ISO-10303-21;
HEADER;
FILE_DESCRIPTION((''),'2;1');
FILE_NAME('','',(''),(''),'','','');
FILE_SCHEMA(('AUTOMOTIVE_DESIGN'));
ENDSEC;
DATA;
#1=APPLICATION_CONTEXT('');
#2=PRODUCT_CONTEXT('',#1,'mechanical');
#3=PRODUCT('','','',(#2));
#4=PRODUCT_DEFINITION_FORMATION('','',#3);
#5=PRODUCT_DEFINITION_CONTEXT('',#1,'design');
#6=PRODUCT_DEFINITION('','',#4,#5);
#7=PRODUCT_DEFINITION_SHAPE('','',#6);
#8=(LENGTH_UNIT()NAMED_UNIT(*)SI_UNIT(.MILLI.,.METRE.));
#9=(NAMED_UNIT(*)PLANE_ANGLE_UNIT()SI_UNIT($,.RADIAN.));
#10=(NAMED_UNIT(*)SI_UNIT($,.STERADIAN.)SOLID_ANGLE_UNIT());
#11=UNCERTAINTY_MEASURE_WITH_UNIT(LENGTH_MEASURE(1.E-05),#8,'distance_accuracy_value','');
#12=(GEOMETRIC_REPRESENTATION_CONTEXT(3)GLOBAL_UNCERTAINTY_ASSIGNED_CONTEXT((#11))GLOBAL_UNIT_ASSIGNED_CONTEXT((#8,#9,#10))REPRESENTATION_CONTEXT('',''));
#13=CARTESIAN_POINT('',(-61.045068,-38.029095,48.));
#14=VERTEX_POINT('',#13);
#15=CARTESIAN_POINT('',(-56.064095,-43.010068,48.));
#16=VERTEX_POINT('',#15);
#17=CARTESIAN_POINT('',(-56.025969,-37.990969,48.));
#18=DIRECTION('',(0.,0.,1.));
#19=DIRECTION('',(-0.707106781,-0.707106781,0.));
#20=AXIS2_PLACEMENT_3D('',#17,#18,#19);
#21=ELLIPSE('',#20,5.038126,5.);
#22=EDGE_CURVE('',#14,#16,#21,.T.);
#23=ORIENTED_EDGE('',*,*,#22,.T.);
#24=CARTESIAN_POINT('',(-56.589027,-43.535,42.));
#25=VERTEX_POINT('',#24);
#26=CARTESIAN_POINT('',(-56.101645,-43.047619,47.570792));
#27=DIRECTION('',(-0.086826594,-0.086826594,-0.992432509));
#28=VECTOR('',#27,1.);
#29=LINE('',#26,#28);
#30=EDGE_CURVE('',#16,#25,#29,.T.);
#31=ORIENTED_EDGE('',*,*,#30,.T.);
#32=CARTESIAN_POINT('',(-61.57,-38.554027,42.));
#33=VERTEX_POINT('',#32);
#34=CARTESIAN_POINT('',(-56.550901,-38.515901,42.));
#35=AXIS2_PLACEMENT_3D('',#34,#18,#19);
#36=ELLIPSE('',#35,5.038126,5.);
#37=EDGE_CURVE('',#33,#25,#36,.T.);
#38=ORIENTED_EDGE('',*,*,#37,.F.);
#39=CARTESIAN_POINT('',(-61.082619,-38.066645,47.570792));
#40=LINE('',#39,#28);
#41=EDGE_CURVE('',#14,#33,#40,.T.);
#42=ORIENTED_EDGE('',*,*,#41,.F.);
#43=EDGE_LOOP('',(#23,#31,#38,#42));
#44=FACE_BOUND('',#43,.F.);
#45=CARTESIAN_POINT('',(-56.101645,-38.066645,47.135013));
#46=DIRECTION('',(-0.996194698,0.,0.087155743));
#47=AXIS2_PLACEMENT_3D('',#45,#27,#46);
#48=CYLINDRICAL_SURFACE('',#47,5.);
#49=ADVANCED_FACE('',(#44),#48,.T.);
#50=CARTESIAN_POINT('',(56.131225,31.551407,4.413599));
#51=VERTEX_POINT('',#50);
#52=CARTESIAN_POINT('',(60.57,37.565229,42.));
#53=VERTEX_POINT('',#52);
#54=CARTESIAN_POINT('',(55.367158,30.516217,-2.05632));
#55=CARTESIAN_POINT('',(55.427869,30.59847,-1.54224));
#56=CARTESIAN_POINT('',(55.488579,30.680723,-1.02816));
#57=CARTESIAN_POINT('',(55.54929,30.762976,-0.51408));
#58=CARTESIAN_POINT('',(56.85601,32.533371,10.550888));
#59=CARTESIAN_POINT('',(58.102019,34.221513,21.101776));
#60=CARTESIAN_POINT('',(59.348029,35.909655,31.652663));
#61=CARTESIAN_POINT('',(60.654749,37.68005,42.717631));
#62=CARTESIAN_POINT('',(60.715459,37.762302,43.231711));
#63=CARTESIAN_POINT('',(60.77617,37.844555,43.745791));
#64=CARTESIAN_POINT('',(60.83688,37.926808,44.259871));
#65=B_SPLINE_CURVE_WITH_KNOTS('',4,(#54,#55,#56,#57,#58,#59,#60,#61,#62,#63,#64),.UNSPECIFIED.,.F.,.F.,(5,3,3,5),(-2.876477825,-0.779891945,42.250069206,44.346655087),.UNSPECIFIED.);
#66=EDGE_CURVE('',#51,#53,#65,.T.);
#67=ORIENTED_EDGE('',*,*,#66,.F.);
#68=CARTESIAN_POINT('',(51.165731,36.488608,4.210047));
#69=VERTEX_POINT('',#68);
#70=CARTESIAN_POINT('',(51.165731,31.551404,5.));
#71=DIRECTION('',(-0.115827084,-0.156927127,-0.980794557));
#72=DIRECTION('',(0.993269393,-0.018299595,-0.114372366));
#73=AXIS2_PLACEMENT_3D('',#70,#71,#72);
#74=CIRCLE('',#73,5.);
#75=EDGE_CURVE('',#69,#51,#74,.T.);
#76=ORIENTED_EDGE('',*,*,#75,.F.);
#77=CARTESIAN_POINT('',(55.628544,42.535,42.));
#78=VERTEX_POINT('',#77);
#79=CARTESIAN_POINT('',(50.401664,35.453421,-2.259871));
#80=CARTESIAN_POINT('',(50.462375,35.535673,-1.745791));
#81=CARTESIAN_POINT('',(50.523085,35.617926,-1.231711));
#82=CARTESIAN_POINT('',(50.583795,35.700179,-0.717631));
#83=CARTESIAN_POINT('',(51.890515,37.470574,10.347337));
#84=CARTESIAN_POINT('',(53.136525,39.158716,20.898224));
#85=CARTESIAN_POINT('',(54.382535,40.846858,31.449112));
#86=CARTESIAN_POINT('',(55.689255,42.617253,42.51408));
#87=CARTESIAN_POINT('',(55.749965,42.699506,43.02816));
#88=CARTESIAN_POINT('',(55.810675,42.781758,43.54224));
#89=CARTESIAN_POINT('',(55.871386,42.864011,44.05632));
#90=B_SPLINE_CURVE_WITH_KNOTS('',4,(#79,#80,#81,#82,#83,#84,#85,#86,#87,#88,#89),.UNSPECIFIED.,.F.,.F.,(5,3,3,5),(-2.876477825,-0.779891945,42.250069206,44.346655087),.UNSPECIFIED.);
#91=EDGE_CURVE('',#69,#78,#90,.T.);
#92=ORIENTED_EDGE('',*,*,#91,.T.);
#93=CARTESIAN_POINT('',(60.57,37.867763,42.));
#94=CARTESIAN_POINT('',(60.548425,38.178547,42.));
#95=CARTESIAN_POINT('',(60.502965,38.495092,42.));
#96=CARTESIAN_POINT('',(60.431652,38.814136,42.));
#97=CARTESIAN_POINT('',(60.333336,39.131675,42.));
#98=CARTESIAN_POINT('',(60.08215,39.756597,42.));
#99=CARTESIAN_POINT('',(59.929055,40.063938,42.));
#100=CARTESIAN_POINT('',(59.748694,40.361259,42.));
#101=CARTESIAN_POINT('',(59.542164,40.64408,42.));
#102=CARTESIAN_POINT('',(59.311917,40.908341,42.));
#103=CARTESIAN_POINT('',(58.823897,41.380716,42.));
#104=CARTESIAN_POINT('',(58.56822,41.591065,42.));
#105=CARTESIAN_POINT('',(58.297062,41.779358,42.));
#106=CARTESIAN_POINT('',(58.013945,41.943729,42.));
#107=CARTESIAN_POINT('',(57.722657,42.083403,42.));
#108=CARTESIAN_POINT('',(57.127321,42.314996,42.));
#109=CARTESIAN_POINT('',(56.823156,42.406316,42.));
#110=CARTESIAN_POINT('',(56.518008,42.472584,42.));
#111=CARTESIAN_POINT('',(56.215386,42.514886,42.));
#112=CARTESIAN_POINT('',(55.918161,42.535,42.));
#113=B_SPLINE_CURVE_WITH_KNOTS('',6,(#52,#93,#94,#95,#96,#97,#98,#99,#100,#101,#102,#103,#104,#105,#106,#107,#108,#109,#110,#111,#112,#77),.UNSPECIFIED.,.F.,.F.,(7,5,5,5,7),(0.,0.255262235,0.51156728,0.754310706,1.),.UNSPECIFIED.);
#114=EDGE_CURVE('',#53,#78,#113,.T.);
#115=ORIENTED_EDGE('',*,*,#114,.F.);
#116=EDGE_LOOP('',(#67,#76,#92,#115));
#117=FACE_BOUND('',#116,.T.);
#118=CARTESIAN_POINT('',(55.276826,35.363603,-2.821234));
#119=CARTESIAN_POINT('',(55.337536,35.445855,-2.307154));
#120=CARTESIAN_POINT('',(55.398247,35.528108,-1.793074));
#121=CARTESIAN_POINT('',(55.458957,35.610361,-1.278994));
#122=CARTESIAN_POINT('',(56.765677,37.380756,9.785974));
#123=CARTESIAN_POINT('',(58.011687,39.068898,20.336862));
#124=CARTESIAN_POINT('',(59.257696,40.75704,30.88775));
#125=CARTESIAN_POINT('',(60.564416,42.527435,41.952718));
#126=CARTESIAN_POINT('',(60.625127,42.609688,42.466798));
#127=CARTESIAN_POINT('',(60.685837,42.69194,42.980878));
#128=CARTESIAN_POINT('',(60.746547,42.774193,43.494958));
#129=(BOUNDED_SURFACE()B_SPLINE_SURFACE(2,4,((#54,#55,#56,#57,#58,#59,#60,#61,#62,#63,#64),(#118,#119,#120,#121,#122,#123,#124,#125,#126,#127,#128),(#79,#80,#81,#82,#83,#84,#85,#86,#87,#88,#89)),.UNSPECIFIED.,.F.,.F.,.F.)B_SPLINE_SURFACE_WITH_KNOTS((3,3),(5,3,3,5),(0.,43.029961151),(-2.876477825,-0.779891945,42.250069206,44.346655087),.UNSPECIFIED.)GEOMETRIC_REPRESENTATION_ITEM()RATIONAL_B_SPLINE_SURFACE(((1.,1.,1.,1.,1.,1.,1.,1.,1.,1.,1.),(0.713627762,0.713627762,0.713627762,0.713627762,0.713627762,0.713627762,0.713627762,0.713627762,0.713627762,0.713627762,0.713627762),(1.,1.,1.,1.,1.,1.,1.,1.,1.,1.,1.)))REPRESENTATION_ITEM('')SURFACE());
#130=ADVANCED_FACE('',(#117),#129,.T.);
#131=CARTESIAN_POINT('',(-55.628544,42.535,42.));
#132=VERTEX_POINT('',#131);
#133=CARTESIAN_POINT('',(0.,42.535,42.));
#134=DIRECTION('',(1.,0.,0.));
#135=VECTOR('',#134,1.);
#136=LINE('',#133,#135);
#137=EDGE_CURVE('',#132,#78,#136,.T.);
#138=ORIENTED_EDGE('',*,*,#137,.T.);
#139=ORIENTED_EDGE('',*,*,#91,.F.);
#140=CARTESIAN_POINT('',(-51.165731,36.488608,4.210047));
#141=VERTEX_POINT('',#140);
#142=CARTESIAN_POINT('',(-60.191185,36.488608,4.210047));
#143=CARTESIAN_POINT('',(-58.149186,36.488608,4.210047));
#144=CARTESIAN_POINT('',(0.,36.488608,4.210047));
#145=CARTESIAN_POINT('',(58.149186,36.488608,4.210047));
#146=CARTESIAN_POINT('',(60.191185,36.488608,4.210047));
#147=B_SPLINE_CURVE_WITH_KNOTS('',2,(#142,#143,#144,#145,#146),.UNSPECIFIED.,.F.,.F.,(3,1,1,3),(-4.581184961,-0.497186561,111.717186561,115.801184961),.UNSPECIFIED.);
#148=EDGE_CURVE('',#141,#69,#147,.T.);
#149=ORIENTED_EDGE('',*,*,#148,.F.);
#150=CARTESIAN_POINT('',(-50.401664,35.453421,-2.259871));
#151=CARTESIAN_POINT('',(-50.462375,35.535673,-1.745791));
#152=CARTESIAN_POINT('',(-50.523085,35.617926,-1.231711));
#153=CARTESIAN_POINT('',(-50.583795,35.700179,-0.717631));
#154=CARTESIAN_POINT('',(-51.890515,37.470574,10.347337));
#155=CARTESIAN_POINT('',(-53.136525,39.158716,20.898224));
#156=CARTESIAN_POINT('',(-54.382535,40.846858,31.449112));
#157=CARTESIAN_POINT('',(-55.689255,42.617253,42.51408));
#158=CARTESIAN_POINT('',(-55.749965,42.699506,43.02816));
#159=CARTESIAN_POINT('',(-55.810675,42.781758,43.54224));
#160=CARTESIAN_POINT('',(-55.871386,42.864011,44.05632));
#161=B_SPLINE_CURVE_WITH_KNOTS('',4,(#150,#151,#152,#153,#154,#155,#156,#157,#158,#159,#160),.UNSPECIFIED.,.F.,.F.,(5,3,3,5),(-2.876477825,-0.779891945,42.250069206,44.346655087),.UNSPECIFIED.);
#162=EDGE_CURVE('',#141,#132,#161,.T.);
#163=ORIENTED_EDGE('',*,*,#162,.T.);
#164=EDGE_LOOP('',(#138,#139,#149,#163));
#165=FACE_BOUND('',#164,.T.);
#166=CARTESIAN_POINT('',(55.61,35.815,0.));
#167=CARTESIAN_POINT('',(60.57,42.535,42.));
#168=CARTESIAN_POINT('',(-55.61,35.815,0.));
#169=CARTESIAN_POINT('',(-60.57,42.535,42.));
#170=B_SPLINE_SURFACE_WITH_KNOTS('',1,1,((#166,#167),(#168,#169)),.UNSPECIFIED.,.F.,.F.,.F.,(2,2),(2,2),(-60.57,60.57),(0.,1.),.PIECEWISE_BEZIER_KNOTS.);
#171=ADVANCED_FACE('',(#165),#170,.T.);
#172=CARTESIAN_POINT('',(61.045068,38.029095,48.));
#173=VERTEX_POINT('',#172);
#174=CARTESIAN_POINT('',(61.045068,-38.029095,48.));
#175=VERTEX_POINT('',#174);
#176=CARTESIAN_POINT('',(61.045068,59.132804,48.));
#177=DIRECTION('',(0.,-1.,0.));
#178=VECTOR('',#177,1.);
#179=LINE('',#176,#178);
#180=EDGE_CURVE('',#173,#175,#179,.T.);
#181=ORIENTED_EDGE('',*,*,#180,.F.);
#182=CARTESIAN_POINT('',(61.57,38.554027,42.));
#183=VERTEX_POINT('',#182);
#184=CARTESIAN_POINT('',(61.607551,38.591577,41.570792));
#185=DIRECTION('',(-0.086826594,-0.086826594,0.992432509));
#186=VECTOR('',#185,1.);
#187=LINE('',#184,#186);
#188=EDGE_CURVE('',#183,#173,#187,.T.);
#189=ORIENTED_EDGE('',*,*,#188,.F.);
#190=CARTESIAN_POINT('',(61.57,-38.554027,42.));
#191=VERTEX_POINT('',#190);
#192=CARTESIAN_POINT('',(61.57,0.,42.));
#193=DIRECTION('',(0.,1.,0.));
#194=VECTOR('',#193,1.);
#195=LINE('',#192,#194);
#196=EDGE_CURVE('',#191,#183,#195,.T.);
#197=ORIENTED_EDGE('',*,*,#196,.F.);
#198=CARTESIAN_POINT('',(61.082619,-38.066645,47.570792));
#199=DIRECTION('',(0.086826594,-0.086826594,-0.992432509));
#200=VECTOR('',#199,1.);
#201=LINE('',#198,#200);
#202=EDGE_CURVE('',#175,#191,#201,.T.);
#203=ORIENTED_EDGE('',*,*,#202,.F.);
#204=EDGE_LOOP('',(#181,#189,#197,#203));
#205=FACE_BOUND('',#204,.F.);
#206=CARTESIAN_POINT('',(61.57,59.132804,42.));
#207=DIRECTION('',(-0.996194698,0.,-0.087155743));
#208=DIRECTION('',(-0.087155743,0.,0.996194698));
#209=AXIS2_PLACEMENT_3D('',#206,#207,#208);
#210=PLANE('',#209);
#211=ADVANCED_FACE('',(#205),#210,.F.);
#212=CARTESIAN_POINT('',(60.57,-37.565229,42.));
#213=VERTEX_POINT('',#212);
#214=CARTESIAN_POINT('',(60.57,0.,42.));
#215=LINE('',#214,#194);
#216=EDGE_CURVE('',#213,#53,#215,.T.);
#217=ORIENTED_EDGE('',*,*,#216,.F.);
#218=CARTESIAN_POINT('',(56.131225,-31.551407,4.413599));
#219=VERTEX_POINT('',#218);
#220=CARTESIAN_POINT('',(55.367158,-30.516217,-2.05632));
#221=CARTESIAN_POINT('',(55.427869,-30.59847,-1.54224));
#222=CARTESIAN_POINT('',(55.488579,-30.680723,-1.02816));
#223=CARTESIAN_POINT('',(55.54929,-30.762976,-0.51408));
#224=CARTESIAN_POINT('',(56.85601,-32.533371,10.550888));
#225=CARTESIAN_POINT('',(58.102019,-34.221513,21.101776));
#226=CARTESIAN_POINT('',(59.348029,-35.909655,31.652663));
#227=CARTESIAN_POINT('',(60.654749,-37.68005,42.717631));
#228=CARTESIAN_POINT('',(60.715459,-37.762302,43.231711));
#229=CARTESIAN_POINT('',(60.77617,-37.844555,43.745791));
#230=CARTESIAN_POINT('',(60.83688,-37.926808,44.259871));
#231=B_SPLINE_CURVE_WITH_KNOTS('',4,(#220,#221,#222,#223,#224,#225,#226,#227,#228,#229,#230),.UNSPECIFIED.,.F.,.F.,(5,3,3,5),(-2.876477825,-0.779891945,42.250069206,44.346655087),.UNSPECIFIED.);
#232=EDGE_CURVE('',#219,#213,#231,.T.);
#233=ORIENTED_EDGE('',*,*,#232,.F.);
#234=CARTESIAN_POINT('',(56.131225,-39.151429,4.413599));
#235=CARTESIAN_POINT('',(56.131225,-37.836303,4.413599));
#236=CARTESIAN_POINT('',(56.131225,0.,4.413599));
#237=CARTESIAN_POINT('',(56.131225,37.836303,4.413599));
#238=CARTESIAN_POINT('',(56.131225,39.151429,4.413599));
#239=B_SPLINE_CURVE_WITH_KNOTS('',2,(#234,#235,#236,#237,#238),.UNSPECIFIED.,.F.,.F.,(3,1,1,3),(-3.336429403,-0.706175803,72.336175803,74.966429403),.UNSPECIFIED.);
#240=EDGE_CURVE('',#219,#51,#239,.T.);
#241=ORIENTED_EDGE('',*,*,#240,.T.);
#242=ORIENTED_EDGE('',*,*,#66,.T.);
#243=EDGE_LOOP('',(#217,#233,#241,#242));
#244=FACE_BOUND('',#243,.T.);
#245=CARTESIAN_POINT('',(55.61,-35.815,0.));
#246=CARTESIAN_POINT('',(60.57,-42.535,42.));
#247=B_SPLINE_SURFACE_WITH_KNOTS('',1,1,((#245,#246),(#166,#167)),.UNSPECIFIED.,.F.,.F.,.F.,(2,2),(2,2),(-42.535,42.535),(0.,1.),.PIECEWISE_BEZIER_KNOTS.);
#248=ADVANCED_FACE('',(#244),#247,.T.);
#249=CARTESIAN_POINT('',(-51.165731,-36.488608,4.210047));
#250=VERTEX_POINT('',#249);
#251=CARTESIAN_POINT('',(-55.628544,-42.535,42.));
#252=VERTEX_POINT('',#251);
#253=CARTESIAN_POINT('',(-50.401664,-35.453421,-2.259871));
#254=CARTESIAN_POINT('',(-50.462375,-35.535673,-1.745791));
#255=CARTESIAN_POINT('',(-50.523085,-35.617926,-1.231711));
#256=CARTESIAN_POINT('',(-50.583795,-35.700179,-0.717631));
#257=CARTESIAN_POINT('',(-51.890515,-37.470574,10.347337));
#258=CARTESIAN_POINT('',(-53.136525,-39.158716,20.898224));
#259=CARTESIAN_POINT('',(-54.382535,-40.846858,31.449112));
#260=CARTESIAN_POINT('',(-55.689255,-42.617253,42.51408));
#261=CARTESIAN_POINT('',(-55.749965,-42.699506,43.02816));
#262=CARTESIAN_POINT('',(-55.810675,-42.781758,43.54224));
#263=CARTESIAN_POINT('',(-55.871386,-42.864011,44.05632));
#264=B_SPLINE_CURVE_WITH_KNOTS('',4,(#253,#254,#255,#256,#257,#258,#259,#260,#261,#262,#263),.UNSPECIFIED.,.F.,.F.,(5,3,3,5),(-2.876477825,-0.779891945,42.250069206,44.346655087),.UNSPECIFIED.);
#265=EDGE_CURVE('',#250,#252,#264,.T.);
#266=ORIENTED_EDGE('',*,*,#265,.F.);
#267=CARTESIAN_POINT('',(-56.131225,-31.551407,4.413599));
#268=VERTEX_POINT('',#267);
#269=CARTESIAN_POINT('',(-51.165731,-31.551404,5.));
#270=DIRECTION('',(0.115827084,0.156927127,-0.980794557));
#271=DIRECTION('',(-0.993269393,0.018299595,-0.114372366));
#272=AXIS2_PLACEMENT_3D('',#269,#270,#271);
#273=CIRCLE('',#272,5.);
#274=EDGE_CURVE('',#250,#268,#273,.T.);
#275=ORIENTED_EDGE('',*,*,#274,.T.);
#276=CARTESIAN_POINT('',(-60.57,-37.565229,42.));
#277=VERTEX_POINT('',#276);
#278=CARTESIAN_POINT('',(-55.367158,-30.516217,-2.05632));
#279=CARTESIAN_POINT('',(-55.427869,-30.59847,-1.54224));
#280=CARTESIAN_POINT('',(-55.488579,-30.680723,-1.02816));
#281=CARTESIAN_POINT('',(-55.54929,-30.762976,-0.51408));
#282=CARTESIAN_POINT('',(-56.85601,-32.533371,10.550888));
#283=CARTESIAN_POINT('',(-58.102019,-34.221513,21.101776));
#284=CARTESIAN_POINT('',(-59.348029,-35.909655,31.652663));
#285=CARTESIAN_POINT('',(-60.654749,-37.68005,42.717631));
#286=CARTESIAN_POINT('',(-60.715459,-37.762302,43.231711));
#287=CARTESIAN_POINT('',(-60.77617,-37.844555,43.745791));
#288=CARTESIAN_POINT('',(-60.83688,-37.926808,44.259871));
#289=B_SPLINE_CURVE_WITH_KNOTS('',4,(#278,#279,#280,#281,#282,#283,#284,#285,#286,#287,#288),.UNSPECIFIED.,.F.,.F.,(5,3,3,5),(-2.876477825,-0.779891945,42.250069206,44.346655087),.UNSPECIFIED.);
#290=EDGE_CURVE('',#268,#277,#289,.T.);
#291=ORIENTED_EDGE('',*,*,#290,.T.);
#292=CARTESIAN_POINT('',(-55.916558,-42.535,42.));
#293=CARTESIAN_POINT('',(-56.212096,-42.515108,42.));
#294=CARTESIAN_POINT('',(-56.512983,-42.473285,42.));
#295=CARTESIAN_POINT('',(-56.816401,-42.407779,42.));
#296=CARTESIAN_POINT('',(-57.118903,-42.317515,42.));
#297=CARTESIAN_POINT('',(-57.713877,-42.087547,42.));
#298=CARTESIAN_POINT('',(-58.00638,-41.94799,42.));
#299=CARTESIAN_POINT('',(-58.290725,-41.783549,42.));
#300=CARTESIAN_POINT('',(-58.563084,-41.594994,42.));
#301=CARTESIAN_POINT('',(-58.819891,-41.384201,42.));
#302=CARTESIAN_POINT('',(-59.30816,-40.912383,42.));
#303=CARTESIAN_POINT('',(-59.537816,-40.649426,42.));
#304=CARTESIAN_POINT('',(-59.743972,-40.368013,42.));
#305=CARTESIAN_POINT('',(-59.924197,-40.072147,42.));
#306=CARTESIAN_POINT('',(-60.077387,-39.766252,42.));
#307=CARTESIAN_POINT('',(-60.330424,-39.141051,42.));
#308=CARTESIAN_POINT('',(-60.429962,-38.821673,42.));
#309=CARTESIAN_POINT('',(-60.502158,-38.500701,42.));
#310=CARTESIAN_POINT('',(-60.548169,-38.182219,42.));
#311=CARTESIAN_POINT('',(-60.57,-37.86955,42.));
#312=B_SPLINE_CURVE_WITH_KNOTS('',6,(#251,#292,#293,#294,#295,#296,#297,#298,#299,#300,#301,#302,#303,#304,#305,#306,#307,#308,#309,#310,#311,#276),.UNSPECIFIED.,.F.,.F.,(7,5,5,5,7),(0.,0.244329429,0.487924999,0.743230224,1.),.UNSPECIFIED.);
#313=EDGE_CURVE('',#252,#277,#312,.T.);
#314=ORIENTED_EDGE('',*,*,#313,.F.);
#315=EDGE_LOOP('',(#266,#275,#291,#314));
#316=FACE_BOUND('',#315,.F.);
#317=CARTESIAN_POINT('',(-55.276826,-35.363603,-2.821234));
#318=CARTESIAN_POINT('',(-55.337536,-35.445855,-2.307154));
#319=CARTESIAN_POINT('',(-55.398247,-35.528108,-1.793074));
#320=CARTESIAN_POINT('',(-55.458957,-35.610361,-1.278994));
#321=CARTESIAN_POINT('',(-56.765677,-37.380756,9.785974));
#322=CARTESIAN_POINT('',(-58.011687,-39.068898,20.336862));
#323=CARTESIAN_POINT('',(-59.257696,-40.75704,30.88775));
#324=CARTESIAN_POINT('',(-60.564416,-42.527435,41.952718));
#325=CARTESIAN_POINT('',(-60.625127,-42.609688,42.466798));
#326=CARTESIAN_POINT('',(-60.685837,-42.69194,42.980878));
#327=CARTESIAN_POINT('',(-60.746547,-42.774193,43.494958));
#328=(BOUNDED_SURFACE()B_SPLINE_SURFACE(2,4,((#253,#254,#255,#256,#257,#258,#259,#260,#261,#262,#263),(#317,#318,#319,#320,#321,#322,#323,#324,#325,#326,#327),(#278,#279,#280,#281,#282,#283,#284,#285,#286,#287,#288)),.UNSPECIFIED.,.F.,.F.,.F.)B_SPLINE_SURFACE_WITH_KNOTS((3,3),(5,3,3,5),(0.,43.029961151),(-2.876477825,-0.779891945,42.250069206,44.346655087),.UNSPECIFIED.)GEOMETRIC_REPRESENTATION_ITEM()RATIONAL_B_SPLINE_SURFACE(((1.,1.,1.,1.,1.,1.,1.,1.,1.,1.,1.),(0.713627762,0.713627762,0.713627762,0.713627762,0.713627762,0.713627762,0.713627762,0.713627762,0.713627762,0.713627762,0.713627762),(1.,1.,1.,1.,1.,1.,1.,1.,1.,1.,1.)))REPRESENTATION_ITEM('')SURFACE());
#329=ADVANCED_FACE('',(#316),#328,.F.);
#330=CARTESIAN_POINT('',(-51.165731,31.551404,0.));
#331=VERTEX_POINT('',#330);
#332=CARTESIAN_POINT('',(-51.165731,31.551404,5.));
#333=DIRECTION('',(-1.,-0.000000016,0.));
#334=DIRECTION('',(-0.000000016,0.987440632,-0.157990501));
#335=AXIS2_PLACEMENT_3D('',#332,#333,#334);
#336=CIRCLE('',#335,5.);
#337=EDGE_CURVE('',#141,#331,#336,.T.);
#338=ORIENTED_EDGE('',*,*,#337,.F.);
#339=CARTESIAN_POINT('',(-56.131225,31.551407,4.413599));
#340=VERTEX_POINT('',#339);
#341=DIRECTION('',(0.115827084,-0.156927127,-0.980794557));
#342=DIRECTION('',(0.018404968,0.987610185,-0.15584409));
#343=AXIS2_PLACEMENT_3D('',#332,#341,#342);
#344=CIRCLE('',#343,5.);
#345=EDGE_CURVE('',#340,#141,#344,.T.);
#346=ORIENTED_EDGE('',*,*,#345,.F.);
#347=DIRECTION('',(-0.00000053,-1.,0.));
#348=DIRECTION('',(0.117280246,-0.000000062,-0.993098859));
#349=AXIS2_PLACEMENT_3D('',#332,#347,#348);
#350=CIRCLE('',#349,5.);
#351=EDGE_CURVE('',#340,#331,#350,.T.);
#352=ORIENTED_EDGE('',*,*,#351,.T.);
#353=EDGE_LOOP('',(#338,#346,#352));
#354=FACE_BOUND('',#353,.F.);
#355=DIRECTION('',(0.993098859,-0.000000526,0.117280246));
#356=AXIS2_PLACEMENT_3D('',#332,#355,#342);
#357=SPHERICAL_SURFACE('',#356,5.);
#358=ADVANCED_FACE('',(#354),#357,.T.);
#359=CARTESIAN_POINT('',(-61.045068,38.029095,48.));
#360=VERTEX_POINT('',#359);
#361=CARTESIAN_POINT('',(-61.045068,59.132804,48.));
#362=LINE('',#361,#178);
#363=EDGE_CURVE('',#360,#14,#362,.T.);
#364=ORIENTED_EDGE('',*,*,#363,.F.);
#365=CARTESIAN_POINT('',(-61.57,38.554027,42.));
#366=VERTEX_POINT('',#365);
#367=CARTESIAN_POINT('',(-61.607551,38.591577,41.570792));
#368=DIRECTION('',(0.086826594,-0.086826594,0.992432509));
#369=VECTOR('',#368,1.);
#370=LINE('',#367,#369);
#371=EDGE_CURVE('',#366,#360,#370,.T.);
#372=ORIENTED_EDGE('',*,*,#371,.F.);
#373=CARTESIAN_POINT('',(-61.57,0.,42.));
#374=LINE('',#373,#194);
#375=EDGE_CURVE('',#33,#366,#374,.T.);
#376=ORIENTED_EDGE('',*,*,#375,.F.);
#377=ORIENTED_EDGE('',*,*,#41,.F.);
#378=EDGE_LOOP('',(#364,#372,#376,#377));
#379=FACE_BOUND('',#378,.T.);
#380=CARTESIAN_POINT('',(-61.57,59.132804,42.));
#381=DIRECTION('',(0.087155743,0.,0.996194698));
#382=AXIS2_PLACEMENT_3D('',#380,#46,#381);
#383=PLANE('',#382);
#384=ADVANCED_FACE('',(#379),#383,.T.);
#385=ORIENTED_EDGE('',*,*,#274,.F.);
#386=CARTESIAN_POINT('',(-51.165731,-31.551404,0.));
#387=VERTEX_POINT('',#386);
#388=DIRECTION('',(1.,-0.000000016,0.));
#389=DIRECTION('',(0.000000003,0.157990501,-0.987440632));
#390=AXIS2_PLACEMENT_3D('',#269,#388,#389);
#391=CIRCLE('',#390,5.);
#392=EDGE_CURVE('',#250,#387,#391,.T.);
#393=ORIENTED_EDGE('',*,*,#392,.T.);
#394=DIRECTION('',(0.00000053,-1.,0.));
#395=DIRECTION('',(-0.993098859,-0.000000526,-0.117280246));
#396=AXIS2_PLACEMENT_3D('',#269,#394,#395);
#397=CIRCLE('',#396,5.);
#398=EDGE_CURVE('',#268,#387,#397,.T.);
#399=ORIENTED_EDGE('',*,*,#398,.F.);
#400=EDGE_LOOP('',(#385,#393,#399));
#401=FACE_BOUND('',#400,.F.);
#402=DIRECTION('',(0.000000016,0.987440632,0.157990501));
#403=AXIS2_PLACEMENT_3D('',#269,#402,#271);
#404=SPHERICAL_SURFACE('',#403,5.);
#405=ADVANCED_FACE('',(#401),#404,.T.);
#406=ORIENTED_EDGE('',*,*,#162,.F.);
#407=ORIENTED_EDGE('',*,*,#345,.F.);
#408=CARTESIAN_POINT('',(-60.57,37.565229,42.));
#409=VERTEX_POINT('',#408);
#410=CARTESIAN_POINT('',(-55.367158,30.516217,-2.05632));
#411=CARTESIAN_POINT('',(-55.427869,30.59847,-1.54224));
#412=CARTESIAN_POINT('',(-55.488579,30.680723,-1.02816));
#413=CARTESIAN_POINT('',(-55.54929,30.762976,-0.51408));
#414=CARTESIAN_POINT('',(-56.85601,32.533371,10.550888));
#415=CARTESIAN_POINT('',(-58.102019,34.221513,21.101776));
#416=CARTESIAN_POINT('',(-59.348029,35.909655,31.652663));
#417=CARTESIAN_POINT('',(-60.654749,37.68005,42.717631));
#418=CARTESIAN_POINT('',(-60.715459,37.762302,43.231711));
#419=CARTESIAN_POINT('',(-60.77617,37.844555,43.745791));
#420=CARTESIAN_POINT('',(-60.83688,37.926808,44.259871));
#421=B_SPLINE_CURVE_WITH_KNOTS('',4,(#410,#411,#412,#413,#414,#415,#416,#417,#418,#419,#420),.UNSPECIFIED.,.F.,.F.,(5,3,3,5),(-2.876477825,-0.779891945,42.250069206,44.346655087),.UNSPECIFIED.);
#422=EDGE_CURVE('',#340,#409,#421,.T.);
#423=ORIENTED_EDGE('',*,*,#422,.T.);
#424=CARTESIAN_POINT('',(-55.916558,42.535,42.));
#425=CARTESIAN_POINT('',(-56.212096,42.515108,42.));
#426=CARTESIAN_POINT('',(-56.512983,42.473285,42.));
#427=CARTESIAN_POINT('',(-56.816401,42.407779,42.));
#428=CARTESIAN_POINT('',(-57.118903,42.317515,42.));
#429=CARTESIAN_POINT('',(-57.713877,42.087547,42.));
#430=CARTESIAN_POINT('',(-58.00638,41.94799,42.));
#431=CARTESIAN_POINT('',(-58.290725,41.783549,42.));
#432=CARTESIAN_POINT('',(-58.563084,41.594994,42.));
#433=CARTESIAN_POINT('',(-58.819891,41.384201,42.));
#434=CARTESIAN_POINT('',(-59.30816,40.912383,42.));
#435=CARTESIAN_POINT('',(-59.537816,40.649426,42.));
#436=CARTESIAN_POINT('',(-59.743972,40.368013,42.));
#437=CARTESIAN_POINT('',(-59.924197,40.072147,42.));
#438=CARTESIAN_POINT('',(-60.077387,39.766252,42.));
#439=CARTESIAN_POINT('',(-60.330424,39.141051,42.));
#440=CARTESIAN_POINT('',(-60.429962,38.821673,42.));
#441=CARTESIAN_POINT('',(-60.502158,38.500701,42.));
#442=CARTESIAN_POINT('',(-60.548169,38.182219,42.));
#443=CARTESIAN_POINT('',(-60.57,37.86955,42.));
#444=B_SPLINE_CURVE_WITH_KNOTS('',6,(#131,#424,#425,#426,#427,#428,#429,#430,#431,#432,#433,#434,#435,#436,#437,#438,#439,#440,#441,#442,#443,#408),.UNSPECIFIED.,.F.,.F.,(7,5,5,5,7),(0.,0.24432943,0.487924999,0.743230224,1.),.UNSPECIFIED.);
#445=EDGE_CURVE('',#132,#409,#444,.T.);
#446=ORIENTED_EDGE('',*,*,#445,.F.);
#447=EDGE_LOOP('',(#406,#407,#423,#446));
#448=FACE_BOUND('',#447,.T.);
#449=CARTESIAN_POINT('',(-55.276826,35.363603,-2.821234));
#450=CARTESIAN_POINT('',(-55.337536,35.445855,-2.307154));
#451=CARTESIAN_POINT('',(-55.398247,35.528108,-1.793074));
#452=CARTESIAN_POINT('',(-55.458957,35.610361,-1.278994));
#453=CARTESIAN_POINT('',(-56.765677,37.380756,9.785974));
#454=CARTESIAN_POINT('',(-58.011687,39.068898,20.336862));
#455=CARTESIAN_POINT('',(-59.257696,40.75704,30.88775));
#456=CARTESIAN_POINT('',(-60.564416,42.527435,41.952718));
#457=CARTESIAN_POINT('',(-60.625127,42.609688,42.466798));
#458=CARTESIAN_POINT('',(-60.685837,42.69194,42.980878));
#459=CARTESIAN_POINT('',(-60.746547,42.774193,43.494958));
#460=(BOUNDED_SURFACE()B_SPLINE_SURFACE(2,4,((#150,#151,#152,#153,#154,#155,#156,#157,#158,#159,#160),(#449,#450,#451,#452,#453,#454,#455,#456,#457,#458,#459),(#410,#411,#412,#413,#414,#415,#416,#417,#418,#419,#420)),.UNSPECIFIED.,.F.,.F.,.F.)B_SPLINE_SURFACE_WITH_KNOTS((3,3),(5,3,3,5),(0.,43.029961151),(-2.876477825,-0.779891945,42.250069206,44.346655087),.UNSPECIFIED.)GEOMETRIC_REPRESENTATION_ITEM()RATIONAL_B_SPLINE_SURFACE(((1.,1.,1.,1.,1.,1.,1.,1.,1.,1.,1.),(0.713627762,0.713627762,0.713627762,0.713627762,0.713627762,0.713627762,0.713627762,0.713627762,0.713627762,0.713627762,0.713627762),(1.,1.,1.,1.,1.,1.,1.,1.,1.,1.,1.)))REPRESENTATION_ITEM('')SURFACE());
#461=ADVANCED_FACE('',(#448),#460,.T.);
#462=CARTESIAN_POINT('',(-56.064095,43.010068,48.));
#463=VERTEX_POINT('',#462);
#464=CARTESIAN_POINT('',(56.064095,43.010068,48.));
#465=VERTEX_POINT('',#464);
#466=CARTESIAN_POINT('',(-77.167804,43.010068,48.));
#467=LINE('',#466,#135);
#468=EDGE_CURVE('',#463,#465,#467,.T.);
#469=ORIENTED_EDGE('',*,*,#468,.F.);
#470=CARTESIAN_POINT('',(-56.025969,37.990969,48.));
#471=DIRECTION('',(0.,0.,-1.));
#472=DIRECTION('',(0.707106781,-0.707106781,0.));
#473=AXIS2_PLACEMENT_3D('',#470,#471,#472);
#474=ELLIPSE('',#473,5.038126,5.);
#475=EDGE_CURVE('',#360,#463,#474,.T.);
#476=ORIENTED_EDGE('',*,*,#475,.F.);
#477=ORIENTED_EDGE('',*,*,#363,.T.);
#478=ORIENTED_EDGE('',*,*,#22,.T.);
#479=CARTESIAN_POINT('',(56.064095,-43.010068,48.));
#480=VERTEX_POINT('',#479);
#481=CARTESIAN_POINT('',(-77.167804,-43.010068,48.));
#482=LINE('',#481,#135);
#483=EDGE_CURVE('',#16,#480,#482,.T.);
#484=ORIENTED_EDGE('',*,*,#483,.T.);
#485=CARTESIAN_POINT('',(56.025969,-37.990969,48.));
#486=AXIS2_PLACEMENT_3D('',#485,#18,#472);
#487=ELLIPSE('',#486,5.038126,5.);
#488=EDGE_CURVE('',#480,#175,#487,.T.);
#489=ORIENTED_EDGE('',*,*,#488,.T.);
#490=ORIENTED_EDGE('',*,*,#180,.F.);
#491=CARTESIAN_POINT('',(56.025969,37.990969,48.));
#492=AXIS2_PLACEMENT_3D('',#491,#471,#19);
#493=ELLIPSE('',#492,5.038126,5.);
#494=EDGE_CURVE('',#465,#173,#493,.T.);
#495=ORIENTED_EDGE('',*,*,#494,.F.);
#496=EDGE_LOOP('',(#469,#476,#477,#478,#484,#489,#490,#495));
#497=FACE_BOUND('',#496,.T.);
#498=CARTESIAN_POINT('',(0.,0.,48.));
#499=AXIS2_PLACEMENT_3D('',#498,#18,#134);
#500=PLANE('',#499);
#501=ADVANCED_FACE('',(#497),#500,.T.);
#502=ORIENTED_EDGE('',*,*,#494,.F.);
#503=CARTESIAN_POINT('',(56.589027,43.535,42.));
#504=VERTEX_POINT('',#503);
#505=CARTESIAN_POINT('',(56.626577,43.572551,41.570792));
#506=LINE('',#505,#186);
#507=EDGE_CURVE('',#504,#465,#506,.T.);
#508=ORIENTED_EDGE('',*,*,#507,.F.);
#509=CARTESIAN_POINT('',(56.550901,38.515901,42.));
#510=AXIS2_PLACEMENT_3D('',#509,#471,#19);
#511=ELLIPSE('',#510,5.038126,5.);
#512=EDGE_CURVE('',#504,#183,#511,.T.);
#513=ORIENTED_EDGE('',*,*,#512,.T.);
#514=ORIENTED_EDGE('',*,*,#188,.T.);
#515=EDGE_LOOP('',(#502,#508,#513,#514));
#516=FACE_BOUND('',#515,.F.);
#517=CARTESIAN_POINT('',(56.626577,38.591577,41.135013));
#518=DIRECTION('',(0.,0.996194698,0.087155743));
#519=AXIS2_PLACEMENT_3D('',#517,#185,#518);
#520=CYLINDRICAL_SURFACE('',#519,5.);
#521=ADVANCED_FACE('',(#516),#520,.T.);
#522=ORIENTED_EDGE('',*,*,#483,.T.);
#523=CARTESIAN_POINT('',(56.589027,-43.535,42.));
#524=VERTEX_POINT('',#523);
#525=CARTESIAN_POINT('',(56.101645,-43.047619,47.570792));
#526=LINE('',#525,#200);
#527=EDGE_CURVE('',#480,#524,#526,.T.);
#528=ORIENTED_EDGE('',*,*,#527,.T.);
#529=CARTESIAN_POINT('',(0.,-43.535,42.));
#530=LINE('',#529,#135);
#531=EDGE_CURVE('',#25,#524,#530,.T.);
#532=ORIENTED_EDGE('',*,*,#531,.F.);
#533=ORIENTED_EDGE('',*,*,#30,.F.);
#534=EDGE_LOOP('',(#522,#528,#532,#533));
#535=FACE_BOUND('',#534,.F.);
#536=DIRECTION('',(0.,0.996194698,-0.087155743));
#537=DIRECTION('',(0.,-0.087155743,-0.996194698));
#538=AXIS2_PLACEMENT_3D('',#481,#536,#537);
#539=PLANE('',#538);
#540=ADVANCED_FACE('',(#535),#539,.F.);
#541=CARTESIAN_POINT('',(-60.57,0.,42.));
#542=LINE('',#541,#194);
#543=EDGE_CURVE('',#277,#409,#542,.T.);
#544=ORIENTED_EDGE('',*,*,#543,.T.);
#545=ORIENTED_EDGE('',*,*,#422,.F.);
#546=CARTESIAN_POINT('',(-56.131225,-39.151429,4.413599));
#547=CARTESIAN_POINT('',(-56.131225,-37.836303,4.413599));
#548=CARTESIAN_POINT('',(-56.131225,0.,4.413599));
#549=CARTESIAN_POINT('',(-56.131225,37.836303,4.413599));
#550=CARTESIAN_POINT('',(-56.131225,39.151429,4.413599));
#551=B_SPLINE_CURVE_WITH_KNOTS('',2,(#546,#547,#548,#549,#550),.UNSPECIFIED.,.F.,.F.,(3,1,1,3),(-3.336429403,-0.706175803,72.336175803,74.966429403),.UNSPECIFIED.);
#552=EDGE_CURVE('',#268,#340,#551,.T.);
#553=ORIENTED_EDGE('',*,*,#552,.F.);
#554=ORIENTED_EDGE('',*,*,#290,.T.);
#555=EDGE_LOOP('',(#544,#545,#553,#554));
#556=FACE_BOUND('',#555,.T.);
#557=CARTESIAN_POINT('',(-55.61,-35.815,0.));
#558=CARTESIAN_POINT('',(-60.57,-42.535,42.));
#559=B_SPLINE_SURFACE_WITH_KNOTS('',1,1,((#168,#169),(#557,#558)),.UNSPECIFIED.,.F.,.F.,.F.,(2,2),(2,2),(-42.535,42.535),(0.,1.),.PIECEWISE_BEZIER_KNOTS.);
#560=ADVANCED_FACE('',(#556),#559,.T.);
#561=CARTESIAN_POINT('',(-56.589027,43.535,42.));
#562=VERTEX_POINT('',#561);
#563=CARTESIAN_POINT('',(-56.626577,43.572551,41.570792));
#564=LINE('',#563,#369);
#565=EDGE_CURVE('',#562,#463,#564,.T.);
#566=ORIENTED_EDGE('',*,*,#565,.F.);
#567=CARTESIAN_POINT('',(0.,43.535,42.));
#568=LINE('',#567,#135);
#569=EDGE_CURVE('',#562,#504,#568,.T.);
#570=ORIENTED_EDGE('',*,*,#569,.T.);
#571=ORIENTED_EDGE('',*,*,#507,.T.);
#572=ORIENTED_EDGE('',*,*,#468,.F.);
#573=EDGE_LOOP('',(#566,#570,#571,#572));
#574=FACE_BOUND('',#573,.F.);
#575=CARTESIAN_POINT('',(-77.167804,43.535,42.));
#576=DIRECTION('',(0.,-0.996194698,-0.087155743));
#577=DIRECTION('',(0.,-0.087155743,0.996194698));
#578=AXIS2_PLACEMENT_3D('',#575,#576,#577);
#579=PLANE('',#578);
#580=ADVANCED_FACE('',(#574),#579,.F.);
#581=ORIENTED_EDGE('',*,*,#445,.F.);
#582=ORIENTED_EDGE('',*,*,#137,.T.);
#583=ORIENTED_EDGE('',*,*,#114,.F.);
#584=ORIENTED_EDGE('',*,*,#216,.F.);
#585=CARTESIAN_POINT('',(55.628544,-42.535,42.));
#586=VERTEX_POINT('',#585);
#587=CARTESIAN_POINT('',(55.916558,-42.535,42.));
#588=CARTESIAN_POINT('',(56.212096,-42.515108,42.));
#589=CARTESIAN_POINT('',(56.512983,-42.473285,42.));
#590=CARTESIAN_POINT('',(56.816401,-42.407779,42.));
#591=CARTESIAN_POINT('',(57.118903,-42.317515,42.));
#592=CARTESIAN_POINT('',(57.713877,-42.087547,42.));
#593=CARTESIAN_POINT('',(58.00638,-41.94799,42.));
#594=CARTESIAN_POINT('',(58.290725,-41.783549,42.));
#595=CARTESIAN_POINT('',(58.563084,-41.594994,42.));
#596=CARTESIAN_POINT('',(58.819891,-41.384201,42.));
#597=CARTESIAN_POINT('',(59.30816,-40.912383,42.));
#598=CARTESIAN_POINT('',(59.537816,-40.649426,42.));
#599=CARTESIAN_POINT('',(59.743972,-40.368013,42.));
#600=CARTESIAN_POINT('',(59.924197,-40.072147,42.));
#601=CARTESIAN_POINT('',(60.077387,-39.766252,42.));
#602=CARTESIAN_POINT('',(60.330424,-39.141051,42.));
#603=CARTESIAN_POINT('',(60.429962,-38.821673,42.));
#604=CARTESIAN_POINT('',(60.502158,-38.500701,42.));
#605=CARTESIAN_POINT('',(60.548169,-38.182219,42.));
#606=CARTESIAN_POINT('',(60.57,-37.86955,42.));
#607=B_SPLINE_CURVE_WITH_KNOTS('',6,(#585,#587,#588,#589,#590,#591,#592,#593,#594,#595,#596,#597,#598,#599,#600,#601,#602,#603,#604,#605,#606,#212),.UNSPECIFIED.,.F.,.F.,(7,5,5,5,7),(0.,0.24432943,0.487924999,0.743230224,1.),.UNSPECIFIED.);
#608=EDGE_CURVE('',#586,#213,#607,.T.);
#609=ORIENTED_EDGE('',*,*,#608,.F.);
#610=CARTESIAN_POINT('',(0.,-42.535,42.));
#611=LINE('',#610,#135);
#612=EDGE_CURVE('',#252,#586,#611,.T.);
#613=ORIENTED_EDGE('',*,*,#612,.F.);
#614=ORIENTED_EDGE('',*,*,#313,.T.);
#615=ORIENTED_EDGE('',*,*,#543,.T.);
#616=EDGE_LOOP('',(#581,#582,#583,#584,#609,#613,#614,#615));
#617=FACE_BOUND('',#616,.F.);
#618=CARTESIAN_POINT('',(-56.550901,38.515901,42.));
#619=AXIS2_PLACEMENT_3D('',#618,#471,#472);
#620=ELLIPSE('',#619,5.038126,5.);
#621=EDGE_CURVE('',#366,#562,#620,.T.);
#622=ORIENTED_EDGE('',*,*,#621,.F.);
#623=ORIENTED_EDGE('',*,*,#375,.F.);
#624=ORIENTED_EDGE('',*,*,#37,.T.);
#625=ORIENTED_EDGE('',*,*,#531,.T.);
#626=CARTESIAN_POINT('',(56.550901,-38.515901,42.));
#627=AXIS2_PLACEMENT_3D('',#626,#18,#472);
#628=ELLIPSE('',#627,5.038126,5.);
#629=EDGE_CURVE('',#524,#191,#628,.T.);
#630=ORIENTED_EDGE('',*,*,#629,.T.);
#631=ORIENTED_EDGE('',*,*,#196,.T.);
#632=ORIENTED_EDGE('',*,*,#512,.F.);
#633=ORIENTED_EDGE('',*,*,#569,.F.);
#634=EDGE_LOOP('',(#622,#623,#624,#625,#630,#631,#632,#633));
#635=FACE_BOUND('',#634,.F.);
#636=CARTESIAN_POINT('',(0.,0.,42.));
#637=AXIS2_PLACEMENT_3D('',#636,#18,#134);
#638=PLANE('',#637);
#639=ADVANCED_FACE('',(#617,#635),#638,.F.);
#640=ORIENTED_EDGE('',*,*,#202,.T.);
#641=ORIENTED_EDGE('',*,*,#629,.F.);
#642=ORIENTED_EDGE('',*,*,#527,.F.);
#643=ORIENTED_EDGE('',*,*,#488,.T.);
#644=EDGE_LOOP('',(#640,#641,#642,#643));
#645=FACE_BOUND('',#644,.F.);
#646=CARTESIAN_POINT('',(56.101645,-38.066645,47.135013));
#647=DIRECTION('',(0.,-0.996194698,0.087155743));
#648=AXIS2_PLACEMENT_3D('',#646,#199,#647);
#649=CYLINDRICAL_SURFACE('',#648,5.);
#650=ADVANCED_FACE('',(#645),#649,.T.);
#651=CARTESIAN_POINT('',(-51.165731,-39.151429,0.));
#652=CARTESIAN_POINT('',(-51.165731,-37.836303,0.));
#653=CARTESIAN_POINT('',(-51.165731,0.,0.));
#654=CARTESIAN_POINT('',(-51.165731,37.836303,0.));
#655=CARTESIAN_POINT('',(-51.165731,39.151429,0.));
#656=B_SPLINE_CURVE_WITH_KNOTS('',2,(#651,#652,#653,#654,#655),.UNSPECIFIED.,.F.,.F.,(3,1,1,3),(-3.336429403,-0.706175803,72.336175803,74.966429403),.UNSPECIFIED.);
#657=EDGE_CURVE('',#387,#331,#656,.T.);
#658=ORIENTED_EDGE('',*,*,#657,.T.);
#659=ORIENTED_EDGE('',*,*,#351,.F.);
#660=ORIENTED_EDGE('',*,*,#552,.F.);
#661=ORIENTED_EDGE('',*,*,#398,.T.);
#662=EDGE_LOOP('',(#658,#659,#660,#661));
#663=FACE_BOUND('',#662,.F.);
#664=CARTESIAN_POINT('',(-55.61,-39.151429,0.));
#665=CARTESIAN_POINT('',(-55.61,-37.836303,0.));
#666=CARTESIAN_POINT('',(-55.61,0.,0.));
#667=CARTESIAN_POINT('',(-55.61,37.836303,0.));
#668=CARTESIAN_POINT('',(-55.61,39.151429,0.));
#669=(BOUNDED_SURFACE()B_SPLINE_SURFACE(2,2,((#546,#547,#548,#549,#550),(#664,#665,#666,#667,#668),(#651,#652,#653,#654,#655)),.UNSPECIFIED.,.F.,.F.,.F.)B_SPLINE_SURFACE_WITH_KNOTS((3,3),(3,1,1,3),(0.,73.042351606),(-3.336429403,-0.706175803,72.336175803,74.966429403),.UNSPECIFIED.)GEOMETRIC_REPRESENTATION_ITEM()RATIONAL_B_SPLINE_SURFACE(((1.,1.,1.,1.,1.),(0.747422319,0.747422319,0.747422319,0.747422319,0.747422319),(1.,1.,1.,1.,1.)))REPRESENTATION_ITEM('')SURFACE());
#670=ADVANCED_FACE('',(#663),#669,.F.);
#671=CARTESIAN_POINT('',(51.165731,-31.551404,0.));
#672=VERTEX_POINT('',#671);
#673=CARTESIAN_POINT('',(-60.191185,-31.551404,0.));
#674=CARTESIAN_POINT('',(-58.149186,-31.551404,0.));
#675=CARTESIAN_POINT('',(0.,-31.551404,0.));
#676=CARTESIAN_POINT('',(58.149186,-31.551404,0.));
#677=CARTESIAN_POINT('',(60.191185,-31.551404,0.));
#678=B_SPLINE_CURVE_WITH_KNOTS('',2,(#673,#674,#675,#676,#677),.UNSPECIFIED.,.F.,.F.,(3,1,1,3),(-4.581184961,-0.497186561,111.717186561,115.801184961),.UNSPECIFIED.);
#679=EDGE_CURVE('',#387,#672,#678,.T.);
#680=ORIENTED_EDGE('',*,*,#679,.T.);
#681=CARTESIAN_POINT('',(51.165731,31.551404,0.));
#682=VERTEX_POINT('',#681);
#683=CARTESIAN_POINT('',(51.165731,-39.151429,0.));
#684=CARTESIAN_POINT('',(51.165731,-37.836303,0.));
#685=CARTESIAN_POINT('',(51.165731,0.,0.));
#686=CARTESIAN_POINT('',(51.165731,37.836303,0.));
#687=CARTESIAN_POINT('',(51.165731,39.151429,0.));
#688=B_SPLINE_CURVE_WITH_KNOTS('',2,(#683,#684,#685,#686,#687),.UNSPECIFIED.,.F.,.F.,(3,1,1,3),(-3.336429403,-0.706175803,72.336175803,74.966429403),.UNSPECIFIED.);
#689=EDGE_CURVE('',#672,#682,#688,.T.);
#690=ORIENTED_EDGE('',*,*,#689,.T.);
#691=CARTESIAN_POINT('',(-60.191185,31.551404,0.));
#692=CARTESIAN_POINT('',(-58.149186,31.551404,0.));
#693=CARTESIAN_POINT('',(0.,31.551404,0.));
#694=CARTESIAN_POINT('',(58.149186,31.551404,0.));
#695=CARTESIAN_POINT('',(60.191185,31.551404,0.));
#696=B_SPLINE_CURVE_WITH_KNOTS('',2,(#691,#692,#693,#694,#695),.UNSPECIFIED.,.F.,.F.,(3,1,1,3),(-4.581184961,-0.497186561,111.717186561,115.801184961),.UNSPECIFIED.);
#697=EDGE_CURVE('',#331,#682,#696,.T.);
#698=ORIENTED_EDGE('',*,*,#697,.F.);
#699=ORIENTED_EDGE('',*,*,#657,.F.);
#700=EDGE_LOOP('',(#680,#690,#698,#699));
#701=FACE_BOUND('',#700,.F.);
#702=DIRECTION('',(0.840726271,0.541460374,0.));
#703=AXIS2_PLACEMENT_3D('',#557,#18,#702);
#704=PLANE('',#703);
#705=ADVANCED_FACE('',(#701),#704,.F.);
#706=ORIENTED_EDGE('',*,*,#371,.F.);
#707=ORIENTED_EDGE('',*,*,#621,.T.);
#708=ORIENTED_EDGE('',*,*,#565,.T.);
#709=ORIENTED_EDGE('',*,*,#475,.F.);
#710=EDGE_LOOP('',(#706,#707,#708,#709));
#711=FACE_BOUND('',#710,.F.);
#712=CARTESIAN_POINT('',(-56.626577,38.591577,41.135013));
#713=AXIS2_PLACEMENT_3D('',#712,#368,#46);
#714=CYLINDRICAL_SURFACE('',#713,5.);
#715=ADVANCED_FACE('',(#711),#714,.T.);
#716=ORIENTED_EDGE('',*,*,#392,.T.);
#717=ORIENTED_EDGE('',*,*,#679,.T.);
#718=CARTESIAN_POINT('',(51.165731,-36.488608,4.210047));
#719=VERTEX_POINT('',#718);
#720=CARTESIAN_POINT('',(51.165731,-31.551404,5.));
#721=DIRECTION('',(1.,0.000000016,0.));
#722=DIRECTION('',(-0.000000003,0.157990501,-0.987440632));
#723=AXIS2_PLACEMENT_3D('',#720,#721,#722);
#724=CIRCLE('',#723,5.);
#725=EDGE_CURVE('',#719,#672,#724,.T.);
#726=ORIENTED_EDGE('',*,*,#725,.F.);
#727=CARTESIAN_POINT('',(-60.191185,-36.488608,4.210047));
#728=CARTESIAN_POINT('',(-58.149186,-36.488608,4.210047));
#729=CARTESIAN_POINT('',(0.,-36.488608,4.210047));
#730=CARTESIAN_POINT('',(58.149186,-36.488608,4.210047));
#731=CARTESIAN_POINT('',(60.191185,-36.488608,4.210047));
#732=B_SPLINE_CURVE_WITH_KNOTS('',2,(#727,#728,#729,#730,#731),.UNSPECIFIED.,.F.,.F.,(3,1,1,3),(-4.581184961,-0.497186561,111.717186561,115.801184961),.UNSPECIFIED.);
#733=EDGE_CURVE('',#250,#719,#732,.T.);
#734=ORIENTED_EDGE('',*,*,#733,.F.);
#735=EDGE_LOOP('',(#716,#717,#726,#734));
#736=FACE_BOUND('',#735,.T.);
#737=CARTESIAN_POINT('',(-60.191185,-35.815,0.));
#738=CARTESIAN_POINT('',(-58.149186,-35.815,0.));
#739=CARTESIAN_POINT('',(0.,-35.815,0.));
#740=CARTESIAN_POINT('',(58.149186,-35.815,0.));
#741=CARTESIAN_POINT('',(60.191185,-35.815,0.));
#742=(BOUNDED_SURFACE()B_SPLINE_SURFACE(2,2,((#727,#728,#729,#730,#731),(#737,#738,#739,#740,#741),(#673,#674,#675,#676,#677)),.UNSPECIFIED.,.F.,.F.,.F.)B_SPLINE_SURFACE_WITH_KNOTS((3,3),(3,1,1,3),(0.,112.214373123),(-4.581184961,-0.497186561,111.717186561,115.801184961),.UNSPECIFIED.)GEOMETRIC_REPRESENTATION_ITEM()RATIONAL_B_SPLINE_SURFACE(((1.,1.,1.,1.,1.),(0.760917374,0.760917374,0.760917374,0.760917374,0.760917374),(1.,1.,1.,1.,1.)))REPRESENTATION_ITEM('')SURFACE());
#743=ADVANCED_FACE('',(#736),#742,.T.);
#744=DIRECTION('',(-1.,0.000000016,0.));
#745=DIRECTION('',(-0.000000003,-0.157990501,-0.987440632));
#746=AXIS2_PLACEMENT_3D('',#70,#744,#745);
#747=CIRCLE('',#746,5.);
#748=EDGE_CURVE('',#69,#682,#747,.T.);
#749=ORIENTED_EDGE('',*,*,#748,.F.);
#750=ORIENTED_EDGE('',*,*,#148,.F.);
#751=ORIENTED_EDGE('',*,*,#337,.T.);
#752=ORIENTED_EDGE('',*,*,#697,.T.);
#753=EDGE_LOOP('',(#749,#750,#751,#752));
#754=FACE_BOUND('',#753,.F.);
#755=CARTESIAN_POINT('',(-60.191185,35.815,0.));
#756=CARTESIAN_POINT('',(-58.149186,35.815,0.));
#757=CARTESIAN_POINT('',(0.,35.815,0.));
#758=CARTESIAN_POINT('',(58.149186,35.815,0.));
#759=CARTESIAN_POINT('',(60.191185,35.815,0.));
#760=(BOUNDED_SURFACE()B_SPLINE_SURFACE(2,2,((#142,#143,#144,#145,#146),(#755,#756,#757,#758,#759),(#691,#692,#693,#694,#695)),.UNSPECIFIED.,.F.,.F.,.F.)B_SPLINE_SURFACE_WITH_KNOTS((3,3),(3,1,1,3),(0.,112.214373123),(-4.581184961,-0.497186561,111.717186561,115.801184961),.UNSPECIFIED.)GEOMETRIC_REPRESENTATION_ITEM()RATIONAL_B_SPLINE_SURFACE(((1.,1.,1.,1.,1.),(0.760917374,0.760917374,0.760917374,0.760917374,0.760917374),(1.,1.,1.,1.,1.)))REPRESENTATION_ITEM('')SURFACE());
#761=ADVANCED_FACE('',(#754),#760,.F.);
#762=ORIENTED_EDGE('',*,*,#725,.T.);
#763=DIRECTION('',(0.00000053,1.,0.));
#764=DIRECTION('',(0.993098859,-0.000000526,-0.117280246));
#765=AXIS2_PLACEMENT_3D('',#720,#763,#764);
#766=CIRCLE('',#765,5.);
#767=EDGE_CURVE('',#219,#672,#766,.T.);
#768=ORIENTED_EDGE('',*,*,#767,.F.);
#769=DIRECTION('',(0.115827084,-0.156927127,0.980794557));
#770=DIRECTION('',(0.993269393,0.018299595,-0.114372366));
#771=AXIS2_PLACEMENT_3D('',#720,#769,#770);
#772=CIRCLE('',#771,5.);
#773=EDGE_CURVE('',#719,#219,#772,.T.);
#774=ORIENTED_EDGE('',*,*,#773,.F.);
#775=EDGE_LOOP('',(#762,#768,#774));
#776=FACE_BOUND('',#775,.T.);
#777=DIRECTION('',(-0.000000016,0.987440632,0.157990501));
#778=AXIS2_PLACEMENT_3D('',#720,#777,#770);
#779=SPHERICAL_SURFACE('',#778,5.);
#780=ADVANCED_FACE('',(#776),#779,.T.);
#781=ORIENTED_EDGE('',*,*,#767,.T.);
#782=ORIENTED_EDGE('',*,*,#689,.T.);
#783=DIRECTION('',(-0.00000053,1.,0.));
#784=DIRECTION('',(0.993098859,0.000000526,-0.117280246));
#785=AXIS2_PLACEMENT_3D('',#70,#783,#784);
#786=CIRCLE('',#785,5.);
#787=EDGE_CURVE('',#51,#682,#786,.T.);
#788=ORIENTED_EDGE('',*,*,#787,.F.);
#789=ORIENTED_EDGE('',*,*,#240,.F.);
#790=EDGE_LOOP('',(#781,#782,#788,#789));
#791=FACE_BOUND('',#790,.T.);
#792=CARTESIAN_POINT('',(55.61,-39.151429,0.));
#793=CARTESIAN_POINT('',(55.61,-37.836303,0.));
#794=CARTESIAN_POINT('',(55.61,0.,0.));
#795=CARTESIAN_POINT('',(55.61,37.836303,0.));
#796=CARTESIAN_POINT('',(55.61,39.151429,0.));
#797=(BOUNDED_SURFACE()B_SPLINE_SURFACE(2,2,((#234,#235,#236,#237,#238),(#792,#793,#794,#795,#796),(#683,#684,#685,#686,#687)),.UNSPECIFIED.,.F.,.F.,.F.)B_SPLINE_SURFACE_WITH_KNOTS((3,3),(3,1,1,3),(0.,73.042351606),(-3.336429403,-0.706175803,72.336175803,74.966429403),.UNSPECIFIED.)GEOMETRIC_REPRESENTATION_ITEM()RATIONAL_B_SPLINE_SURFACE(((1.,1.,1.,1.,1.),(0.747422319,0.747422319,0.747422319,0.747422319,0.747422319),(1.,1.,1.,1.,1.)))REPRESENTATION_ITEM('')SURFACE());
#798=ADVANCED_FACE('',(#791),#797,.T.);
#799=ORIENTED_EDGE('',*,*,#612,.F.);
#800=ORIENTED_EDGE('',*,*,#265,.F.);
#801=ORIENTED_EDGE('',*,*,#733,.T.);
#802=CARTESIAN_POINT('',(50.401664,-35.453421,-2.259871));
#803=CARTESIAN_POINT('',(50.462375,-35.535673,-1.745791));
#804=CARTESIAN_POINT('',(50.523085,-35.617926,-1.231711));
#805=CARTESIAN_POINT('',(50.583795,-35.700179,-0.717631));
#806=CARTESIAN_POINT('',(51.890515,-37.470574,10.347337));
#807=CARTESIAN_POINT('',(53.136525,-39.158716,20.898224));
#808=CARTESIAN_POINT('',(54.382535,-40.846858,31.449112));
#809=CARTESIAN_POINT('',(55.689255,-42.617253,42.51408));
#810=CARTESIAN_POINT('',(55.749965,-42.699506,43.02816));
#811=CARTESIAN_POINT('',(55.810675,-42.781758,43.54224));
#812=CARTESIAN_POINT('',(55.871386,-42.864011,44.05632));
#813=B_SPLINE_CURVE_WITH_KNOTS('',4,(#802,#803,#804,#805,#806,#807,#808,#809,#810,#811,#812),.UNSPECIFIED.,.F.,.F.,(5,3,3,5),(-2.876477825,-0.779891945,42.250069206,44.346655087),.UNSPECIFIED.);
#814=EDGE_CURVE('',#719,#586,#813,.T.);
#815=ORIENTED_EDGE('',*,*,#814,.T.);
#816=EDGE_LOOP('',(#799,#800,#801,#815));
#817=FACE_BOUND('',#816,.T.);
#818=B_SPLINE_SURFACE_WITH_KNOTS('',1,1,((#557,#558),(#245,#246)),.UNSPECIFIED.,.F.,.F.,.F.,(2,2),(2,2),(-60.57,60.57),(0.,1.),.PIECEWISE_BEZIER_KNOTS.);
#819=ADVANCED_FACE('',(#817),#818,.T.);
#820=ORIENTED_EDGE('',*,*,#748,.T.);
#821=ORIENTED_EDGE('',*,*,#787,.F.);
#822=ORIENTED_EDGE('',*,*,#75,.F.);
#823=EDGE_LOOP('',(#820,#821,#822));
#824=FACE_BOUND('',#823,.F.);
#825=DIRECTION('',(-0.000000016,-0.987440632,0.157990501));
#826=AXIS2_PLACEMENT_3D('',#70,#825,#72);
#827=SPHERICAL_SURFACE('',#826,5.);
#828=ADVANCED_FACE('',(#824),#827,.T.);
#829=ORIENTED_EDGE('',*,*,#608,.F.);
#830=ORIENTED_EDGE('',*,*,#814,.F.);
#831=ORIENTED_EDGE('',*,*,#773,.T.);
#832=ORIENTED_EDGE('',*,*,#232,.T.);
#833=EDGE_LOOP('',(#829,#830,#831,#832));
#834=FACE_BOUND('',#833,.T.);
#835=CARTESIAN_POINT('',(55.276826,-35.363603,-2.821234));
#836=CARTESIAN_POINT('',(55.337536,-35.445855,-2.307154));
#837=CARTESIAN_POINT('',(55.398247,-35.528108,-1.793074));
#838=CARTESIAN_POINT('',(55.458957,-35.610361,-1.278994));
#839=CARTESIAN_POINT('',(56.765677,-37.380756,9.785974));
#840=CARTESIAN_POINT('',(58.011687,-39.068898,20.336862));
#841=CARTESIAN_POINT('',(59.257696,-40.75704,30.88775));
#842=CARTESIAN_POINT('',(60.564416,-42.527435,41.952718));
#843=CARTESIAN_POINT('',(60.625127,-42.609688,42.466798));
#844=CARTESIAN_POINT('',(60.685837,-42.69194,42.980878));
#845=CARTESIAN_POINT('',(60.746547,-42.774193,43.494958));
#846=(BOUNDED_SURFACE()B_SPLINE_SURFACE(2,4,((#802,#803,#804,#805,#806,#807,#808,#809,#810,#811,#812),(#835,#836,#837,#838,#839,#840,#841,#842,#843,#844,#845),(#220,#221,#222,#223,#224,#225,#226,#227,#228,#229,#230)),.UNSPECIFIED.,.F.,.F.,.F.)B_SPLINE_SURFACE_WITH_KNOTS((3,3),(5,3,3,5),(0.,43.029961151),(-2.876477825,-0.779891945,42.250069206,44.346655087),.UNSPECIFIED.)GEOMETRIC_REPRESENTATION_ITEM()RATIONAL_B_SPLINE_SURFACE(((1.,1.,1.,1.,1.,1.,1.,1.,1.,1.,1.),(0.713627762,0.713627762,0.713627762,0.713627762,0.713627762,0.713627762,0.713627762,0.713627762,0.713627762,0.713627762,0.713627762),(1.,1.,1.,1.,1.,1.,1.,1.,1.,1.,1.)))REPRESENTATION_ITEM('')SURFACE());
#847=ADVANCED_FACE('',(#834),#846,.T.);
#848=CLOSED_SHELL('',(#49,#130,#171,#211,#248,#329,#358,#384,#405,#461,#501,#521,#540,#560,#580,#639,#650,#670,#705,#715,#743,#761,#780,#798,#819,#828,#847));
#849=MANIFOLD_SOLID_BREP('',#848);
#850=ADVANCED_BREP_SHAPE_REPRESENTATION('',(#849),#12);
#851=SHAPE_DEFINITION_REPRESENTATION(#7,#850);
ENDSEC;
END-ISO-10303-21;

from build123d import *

# Parameters (mm, degrees)
F0_W        = 111.22
F0_H        = 71.63
F2_W        = 121.14
F2_H        = 85.07
F4_W        = 123.14
F4_H        = 87.07
F5_DEPTH    = 6
F6_T1_DEPTH = 118.265608958
F6_T3_DEPTH = 154.335608958
F9_R        = 5


# Not quite as in the source:
# - a fillet or chamfer that OpenCascade refuses, or shapes differently, is made with other operations: its cross-section is extruded or revolved along the edge and cut away or added
# - a feature of the source that left no trace in its solid (it failed there, or was rolled back) is left out


with BuildPart() as f3:
    # F0 (on Top) → F3 section 0
    with BuildSketch(Plane.XY):
        Rectangle(F0_W, F0_H)
    # F2 (on offset) → F3 section 1
    with BuildSketch(Plane.XY.offset(42)):
        Rectangle(F2_W, F2_H)
    loft()

    # F4 (on face) → F5 (join)
    with BuildSketch(Plane.XY.offset(42)):
        Rectangle(F4_W, F4_H)
    extrude(amount=F5_DEPTH)

    # F6: chamfer of 6 x 0.5249319812 on 4 edges, made by hand

    # F6_s2 → F6_t1 (cut)
    with BuildSketch(Plane.XZ.offset(-59.132804479)):
        Polygon((-61.57, 42), (-61.0450680188, 48), (-61.57, 48), align=None)
        Polygon((61.57, 42), (61.0450680188, 48), (61.57, 48), align=None)
    extrude(amount=F6_T1_DEPTH, mode=Mode.SUBTRACT)

    # F6_s4 → F6_t3 (cut)
    with BuildSketch(Plane.YZ.offset(-77.167804479)):
        Polygon((-43.0100680188, 48), (-43.535, 42), (-43.535, 48), align=None)
        Polygon((43.535, 42), (43.0100680188, 48), (43.535, 48), align=None)
    extrude(amount=F6_T3_DEPTH, mode=Mode.SUBTRACT)

    # F9
    f9_edges = [f3.edges().sort_by_distance(p)[0] for p in [
        (-61.307534, -43.272534, 45),
        (-61.307534, 43.272534, 45),
        (61.307534, 43.272534, 45),
        (61.307534, -43.272534, 45),
        (55.61, 0, 0),
        (58.09, 39.175, 21),
        (58.09, -39.175, 21),
        (0, 35.815, 0),
        (-58.09, 39.175, 21),
        (-55.61, 0, 0),
        (-58.09, -39.175, 21),
        (0, -35.815, 0),
    ]]
    fillet(f9_edges, radius=F9_R)


solid = f3.part
